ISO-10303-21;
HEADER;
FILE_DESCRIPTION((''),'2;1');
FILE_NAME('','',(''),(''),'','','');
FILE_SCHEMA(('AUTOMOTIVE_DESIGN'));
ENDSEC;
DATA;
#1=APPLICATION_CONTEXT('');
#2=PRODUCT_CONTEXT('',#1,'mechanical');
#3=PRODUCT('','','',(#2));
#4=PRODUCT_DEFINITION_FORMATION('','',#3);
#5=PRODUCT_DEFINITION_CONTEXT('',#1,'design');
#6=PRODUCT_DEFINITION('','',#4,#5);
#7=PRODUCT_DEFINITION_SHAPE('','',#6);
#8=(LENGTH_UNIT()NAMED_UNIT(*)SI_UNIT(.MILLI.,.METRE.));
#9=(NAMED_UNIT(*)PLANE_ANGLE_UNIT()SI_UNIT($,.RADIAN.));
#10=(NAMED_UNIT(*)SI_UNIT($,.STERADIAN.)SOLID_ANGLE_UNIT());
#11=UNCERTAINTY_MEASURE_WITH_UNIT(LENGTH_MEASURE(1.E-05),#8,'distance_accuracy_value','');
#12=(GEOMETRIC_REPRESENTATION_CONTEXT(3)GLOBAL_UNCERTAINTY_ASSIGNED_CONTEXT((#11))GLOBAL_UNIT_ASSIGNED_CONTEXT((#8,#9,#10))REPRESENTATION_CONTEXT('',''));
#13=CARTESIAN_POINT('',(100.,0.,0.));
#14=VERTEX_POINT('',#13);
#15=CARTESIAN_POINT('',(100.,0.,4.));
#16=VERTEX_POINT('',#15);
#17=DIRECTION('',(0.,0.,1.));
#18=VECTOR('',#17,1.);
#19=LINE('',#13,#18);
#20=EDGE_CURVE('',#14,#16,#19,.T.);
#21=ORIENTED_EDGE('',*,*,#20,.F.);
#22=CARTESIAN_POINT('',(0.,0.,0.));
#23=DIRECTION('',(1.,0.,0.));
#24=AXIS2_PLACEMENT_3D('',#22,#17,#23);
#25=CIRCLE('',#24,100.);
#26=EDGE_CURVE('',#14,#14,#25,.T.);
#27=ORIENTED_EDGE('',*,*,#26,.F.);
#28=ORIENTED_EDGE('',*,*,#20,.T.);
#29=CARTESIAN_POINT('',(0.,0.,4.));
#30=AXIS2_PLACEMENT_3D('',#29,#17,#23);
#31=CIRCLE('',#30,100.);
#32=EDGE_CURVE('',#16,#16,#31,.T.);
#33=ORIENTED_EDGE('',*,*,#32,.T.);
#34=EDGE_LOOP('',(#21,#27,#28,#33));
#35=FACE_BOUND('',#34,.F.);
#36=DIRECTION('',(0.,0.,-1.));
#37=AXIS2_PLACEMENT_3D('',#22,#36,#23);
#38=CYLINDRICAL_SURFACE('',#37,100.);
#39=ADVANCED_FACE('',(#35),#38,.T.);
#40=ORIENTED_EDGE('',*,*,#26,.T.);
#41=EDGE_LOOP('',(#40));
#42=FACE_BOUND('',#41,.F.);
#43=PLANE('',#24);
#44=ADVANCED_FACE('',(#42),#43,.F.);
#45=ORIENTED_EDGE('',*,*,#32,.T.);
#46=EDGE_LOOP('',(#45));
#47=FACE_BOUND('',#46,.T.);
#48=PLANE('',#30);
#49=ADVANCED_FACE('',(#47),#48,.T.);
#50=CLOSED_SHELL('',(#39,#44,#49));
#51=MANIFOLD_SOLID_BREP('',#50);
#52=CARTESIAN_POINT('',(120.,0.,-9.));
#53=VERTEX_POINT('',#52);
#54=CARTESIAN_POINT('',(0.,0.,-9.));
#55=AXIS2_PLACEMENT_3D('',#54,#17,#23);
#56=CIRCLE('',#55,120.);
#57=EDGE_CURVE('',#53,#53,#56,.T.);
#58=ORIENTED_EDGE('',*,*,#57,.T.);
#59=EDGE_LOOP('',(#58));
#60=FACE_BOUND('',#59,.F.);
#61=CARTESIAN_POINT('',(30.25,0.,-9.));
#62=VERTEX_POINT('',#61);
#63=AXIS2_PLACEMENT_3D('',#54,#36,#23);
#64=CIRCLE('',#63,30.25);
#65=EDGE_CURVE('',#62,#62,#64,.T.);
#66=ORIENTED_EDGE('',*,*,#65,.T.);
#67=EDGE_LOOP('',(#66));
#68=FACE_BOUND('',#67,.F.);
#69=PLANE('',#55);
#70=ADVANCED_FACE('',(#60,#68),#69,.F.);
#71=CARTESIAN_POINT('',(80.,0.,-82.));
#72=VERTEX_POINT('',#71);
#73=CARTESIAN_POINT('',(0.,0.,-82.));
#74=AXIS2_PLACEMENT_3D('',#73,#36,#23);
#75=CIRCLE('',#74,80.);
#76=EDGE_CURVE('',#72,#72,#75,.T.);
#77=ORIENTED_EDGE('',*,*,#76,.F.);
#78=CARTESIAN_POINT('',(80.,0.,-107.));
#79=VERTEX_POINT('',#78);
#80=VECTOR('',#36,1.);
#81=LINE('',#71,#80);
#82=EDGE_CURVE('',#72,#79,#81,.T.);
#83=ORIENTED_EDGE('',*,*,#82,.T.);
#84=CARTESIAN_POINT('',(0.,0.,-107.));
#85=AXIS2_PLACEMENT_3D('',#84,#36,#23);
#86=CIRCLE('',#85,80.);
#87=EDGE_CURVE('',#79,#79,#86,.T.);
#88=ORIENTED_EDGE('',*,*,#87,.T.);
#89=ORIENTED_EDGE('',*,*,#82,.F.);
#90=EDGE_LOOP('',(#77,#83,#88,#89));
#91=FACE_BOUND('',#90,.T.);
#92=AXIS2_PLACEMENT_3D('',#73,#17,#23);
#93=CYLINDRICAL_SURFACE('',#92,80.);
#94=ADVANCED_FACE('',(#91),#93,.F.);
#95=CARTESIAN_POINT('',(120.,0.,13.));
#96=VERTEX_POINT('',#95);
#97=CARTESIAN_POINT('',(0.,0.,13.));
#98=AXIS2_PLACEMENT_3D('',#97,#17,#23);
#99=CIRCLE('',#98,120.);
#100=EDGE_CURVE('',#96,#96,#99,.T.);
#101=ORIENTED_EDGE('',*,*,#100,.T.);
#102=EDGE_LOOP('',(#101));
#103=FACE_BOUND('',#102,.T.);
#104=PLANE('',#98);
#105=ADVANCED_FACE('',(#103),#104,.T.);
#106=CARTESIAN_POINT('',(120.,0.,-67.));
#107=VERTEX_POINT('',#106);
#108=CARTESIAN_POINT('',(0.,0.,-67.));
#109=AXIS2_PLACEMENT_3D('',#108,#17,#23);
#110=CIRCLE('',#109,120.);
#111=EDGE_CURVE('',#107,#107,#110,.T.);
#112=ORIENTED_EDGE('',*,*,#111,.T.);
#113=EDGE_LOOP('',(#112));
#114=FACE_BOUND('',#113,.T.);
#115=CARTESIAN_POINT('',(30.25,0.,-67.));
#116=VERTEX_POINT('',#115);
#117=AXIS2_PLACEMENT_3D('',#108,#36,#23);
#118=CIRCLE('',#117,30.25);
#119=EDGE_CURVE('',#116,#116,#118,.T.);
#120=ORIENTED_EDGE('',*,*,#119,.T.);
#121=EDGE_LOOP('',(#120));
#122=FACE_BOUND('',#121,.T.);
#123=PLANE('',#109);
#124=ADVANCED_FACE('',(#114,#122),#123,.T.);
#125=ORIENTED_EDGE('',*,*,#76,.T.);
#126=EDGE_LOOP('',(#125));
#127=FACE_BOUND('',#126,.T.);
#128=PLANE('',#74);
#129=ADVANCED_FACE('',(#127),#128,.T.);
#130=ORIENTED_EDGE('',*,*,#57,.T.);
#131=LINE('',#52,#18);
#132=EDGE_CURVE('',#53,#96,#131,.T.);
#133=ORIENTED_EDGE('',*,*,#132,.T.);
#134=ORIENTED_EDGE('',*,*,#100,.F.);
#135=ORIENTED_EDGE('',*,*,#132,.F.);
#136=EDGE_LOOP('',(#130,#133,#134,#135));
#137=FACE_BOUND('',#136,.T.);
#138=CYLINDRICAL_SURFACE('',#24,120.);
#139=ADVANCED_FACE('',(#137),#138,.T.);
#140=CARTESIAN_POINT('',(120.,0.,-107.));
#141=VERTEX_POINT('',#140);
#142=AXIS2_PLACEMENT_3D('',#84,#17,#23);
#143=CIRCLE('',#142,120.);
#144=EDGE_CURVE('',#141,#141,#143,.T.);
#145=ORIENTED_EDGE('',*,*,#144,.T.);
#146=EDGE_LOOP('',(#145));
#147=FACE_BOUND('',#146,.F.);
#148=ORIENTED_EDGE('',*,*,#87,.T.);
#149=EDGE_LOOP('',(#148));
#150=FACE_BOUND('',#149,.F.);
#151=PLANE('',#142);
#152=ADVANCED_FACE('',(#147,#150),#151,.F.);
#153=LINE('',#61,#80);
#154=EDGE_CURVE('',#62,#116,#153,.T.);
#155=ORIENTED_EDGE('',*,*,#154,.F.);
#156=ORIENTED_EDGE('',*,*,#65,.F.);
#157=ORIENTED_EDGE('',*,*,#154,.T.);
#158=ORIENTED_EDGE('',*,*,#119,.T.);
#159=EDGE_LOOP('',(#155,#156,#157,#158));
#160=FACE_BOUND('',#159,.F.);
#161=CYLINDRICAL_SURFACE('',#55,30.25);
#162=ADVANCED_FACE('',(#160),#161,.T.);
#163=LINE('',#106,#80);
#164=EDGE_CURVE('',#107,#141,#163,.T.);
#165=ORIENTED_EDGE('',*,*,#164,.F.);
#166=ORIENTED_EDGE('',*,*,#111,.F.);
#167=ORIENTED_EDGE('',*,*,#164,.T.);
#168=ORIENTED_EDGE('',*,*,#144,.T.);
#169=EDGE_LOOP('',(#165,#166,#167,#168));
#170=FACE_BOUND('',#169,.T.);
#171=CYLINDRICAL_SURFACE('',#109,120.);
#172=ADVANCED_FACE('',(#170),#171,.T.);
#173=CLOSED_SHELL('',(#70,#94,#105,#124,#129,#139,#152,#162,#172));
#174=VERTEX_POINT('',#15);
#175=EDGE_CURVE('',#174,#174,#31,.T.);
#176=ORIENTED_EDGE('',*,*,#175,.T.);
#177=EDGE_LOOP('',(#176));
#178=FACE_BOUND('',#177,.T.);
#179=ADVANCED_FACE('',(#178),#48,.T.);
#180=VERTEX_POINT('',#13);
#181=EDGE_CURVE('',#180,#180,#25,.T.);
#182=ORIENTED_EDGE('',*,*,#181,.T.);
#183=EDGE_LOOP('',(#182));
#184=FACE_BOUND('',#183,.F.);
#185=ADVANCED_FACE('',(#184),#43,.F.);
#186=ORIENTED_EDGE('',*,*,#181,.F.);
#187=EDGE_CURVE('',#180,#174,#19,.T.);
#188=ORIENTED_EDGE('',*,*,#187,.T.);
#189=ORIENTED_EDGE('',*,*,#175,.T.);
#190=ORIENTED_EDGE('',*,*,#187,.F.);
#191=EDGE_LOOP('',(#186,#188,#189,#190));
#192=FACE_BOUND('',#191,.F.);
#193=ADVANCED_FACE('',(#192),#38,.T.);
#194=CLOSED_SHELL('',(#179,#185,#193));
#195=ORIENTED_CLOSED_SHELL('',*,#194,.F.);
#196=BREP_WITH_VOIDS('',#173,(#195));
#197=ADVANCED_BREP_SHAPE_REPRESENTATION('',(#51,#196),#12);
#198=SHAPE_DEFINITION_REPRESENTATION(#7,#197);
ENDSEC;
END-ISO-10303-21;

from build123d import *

# Parameters (mm, degrees)
F0_R      = 120
F0_R_2    = 100
F1_DEPTH  = 9
F2_DEPTH  = 4
F3_DEPTH  = 13
F4_DEPTH  = 9
F5_R      = 30.25
F6_DEPTH  = 58
F7_START  = -80
F4_FACE_R = 120
F7_DEPTH  = 40
F8_START  = 73
F5_R_2    = 80
F8_DEPTH  = 25


with BuildPart() as f1:
    # F0 (on Top) → F1 (new body)
    with BuildSketch(Plane.XY):
        Circle(F0_R)
        Circle(F0_R_2, mode=Mode.SUBTRACT)
        Circle(F0_R_2)
    extrude(amount=-F1_DEPTH)

    # F0 (on Top) → F3 (join)
    with BuildSketch(Plane.XY):
        Circle(F0_R)
        Circle(F0_R_2, mode=Mode.SUBTRACT)
    extrude(amount=F3_DEPTH)



with BuildPart() as f2:
    # F0 (on Top) → F2 (new body)
    with BuildSketch(Plane.XY):
        Circle(F0_R_2)
    extrude(amount=F2_DEPTH)


with BuildPart() as f1_1:
    add(f1.part)
    # F4 (add): a face of the model
    f4_faces = [f2.part.faces().sort_by_distance(p)[0] for p in [
        (0, 0, 4),
    ]]
    extrude(f4_faces, amount=F4_DEPTH)

    # F5 (on face) → F6 (join)
    with BuildSketch(Plane(origin=(0, 0, -9), x_dir=(1, 0, 0), z_dir=(0, 0, -1))):
        Circle(F5_R)
    extrude(amount=F6_DEPTH)

    # F4_face (on face) → F7 (join)
    with BuildSketch(Plane.XY.offset(13).offset(F7_START)):
        Circle(F4_FACE_R)
    extrude(amount=-F7_DEPTH)

    # F5 (on face) → F8 (cut)
    with BuildSketch(Plane(origin=(0, 0, -9), x_dir=(1, 0, 0), z_dir=(0, 0, -1)).offset(F8_START)):
        Circle(F5_R_2)
        Circle(F5_R, mode=Mode.SUBTRACT)
        Circle(F5_R)
    extrude(amount=F8_DEPTH, mode=Mode.SUBTRACT)


solid = Compound([f2.part, f1_1.part])
